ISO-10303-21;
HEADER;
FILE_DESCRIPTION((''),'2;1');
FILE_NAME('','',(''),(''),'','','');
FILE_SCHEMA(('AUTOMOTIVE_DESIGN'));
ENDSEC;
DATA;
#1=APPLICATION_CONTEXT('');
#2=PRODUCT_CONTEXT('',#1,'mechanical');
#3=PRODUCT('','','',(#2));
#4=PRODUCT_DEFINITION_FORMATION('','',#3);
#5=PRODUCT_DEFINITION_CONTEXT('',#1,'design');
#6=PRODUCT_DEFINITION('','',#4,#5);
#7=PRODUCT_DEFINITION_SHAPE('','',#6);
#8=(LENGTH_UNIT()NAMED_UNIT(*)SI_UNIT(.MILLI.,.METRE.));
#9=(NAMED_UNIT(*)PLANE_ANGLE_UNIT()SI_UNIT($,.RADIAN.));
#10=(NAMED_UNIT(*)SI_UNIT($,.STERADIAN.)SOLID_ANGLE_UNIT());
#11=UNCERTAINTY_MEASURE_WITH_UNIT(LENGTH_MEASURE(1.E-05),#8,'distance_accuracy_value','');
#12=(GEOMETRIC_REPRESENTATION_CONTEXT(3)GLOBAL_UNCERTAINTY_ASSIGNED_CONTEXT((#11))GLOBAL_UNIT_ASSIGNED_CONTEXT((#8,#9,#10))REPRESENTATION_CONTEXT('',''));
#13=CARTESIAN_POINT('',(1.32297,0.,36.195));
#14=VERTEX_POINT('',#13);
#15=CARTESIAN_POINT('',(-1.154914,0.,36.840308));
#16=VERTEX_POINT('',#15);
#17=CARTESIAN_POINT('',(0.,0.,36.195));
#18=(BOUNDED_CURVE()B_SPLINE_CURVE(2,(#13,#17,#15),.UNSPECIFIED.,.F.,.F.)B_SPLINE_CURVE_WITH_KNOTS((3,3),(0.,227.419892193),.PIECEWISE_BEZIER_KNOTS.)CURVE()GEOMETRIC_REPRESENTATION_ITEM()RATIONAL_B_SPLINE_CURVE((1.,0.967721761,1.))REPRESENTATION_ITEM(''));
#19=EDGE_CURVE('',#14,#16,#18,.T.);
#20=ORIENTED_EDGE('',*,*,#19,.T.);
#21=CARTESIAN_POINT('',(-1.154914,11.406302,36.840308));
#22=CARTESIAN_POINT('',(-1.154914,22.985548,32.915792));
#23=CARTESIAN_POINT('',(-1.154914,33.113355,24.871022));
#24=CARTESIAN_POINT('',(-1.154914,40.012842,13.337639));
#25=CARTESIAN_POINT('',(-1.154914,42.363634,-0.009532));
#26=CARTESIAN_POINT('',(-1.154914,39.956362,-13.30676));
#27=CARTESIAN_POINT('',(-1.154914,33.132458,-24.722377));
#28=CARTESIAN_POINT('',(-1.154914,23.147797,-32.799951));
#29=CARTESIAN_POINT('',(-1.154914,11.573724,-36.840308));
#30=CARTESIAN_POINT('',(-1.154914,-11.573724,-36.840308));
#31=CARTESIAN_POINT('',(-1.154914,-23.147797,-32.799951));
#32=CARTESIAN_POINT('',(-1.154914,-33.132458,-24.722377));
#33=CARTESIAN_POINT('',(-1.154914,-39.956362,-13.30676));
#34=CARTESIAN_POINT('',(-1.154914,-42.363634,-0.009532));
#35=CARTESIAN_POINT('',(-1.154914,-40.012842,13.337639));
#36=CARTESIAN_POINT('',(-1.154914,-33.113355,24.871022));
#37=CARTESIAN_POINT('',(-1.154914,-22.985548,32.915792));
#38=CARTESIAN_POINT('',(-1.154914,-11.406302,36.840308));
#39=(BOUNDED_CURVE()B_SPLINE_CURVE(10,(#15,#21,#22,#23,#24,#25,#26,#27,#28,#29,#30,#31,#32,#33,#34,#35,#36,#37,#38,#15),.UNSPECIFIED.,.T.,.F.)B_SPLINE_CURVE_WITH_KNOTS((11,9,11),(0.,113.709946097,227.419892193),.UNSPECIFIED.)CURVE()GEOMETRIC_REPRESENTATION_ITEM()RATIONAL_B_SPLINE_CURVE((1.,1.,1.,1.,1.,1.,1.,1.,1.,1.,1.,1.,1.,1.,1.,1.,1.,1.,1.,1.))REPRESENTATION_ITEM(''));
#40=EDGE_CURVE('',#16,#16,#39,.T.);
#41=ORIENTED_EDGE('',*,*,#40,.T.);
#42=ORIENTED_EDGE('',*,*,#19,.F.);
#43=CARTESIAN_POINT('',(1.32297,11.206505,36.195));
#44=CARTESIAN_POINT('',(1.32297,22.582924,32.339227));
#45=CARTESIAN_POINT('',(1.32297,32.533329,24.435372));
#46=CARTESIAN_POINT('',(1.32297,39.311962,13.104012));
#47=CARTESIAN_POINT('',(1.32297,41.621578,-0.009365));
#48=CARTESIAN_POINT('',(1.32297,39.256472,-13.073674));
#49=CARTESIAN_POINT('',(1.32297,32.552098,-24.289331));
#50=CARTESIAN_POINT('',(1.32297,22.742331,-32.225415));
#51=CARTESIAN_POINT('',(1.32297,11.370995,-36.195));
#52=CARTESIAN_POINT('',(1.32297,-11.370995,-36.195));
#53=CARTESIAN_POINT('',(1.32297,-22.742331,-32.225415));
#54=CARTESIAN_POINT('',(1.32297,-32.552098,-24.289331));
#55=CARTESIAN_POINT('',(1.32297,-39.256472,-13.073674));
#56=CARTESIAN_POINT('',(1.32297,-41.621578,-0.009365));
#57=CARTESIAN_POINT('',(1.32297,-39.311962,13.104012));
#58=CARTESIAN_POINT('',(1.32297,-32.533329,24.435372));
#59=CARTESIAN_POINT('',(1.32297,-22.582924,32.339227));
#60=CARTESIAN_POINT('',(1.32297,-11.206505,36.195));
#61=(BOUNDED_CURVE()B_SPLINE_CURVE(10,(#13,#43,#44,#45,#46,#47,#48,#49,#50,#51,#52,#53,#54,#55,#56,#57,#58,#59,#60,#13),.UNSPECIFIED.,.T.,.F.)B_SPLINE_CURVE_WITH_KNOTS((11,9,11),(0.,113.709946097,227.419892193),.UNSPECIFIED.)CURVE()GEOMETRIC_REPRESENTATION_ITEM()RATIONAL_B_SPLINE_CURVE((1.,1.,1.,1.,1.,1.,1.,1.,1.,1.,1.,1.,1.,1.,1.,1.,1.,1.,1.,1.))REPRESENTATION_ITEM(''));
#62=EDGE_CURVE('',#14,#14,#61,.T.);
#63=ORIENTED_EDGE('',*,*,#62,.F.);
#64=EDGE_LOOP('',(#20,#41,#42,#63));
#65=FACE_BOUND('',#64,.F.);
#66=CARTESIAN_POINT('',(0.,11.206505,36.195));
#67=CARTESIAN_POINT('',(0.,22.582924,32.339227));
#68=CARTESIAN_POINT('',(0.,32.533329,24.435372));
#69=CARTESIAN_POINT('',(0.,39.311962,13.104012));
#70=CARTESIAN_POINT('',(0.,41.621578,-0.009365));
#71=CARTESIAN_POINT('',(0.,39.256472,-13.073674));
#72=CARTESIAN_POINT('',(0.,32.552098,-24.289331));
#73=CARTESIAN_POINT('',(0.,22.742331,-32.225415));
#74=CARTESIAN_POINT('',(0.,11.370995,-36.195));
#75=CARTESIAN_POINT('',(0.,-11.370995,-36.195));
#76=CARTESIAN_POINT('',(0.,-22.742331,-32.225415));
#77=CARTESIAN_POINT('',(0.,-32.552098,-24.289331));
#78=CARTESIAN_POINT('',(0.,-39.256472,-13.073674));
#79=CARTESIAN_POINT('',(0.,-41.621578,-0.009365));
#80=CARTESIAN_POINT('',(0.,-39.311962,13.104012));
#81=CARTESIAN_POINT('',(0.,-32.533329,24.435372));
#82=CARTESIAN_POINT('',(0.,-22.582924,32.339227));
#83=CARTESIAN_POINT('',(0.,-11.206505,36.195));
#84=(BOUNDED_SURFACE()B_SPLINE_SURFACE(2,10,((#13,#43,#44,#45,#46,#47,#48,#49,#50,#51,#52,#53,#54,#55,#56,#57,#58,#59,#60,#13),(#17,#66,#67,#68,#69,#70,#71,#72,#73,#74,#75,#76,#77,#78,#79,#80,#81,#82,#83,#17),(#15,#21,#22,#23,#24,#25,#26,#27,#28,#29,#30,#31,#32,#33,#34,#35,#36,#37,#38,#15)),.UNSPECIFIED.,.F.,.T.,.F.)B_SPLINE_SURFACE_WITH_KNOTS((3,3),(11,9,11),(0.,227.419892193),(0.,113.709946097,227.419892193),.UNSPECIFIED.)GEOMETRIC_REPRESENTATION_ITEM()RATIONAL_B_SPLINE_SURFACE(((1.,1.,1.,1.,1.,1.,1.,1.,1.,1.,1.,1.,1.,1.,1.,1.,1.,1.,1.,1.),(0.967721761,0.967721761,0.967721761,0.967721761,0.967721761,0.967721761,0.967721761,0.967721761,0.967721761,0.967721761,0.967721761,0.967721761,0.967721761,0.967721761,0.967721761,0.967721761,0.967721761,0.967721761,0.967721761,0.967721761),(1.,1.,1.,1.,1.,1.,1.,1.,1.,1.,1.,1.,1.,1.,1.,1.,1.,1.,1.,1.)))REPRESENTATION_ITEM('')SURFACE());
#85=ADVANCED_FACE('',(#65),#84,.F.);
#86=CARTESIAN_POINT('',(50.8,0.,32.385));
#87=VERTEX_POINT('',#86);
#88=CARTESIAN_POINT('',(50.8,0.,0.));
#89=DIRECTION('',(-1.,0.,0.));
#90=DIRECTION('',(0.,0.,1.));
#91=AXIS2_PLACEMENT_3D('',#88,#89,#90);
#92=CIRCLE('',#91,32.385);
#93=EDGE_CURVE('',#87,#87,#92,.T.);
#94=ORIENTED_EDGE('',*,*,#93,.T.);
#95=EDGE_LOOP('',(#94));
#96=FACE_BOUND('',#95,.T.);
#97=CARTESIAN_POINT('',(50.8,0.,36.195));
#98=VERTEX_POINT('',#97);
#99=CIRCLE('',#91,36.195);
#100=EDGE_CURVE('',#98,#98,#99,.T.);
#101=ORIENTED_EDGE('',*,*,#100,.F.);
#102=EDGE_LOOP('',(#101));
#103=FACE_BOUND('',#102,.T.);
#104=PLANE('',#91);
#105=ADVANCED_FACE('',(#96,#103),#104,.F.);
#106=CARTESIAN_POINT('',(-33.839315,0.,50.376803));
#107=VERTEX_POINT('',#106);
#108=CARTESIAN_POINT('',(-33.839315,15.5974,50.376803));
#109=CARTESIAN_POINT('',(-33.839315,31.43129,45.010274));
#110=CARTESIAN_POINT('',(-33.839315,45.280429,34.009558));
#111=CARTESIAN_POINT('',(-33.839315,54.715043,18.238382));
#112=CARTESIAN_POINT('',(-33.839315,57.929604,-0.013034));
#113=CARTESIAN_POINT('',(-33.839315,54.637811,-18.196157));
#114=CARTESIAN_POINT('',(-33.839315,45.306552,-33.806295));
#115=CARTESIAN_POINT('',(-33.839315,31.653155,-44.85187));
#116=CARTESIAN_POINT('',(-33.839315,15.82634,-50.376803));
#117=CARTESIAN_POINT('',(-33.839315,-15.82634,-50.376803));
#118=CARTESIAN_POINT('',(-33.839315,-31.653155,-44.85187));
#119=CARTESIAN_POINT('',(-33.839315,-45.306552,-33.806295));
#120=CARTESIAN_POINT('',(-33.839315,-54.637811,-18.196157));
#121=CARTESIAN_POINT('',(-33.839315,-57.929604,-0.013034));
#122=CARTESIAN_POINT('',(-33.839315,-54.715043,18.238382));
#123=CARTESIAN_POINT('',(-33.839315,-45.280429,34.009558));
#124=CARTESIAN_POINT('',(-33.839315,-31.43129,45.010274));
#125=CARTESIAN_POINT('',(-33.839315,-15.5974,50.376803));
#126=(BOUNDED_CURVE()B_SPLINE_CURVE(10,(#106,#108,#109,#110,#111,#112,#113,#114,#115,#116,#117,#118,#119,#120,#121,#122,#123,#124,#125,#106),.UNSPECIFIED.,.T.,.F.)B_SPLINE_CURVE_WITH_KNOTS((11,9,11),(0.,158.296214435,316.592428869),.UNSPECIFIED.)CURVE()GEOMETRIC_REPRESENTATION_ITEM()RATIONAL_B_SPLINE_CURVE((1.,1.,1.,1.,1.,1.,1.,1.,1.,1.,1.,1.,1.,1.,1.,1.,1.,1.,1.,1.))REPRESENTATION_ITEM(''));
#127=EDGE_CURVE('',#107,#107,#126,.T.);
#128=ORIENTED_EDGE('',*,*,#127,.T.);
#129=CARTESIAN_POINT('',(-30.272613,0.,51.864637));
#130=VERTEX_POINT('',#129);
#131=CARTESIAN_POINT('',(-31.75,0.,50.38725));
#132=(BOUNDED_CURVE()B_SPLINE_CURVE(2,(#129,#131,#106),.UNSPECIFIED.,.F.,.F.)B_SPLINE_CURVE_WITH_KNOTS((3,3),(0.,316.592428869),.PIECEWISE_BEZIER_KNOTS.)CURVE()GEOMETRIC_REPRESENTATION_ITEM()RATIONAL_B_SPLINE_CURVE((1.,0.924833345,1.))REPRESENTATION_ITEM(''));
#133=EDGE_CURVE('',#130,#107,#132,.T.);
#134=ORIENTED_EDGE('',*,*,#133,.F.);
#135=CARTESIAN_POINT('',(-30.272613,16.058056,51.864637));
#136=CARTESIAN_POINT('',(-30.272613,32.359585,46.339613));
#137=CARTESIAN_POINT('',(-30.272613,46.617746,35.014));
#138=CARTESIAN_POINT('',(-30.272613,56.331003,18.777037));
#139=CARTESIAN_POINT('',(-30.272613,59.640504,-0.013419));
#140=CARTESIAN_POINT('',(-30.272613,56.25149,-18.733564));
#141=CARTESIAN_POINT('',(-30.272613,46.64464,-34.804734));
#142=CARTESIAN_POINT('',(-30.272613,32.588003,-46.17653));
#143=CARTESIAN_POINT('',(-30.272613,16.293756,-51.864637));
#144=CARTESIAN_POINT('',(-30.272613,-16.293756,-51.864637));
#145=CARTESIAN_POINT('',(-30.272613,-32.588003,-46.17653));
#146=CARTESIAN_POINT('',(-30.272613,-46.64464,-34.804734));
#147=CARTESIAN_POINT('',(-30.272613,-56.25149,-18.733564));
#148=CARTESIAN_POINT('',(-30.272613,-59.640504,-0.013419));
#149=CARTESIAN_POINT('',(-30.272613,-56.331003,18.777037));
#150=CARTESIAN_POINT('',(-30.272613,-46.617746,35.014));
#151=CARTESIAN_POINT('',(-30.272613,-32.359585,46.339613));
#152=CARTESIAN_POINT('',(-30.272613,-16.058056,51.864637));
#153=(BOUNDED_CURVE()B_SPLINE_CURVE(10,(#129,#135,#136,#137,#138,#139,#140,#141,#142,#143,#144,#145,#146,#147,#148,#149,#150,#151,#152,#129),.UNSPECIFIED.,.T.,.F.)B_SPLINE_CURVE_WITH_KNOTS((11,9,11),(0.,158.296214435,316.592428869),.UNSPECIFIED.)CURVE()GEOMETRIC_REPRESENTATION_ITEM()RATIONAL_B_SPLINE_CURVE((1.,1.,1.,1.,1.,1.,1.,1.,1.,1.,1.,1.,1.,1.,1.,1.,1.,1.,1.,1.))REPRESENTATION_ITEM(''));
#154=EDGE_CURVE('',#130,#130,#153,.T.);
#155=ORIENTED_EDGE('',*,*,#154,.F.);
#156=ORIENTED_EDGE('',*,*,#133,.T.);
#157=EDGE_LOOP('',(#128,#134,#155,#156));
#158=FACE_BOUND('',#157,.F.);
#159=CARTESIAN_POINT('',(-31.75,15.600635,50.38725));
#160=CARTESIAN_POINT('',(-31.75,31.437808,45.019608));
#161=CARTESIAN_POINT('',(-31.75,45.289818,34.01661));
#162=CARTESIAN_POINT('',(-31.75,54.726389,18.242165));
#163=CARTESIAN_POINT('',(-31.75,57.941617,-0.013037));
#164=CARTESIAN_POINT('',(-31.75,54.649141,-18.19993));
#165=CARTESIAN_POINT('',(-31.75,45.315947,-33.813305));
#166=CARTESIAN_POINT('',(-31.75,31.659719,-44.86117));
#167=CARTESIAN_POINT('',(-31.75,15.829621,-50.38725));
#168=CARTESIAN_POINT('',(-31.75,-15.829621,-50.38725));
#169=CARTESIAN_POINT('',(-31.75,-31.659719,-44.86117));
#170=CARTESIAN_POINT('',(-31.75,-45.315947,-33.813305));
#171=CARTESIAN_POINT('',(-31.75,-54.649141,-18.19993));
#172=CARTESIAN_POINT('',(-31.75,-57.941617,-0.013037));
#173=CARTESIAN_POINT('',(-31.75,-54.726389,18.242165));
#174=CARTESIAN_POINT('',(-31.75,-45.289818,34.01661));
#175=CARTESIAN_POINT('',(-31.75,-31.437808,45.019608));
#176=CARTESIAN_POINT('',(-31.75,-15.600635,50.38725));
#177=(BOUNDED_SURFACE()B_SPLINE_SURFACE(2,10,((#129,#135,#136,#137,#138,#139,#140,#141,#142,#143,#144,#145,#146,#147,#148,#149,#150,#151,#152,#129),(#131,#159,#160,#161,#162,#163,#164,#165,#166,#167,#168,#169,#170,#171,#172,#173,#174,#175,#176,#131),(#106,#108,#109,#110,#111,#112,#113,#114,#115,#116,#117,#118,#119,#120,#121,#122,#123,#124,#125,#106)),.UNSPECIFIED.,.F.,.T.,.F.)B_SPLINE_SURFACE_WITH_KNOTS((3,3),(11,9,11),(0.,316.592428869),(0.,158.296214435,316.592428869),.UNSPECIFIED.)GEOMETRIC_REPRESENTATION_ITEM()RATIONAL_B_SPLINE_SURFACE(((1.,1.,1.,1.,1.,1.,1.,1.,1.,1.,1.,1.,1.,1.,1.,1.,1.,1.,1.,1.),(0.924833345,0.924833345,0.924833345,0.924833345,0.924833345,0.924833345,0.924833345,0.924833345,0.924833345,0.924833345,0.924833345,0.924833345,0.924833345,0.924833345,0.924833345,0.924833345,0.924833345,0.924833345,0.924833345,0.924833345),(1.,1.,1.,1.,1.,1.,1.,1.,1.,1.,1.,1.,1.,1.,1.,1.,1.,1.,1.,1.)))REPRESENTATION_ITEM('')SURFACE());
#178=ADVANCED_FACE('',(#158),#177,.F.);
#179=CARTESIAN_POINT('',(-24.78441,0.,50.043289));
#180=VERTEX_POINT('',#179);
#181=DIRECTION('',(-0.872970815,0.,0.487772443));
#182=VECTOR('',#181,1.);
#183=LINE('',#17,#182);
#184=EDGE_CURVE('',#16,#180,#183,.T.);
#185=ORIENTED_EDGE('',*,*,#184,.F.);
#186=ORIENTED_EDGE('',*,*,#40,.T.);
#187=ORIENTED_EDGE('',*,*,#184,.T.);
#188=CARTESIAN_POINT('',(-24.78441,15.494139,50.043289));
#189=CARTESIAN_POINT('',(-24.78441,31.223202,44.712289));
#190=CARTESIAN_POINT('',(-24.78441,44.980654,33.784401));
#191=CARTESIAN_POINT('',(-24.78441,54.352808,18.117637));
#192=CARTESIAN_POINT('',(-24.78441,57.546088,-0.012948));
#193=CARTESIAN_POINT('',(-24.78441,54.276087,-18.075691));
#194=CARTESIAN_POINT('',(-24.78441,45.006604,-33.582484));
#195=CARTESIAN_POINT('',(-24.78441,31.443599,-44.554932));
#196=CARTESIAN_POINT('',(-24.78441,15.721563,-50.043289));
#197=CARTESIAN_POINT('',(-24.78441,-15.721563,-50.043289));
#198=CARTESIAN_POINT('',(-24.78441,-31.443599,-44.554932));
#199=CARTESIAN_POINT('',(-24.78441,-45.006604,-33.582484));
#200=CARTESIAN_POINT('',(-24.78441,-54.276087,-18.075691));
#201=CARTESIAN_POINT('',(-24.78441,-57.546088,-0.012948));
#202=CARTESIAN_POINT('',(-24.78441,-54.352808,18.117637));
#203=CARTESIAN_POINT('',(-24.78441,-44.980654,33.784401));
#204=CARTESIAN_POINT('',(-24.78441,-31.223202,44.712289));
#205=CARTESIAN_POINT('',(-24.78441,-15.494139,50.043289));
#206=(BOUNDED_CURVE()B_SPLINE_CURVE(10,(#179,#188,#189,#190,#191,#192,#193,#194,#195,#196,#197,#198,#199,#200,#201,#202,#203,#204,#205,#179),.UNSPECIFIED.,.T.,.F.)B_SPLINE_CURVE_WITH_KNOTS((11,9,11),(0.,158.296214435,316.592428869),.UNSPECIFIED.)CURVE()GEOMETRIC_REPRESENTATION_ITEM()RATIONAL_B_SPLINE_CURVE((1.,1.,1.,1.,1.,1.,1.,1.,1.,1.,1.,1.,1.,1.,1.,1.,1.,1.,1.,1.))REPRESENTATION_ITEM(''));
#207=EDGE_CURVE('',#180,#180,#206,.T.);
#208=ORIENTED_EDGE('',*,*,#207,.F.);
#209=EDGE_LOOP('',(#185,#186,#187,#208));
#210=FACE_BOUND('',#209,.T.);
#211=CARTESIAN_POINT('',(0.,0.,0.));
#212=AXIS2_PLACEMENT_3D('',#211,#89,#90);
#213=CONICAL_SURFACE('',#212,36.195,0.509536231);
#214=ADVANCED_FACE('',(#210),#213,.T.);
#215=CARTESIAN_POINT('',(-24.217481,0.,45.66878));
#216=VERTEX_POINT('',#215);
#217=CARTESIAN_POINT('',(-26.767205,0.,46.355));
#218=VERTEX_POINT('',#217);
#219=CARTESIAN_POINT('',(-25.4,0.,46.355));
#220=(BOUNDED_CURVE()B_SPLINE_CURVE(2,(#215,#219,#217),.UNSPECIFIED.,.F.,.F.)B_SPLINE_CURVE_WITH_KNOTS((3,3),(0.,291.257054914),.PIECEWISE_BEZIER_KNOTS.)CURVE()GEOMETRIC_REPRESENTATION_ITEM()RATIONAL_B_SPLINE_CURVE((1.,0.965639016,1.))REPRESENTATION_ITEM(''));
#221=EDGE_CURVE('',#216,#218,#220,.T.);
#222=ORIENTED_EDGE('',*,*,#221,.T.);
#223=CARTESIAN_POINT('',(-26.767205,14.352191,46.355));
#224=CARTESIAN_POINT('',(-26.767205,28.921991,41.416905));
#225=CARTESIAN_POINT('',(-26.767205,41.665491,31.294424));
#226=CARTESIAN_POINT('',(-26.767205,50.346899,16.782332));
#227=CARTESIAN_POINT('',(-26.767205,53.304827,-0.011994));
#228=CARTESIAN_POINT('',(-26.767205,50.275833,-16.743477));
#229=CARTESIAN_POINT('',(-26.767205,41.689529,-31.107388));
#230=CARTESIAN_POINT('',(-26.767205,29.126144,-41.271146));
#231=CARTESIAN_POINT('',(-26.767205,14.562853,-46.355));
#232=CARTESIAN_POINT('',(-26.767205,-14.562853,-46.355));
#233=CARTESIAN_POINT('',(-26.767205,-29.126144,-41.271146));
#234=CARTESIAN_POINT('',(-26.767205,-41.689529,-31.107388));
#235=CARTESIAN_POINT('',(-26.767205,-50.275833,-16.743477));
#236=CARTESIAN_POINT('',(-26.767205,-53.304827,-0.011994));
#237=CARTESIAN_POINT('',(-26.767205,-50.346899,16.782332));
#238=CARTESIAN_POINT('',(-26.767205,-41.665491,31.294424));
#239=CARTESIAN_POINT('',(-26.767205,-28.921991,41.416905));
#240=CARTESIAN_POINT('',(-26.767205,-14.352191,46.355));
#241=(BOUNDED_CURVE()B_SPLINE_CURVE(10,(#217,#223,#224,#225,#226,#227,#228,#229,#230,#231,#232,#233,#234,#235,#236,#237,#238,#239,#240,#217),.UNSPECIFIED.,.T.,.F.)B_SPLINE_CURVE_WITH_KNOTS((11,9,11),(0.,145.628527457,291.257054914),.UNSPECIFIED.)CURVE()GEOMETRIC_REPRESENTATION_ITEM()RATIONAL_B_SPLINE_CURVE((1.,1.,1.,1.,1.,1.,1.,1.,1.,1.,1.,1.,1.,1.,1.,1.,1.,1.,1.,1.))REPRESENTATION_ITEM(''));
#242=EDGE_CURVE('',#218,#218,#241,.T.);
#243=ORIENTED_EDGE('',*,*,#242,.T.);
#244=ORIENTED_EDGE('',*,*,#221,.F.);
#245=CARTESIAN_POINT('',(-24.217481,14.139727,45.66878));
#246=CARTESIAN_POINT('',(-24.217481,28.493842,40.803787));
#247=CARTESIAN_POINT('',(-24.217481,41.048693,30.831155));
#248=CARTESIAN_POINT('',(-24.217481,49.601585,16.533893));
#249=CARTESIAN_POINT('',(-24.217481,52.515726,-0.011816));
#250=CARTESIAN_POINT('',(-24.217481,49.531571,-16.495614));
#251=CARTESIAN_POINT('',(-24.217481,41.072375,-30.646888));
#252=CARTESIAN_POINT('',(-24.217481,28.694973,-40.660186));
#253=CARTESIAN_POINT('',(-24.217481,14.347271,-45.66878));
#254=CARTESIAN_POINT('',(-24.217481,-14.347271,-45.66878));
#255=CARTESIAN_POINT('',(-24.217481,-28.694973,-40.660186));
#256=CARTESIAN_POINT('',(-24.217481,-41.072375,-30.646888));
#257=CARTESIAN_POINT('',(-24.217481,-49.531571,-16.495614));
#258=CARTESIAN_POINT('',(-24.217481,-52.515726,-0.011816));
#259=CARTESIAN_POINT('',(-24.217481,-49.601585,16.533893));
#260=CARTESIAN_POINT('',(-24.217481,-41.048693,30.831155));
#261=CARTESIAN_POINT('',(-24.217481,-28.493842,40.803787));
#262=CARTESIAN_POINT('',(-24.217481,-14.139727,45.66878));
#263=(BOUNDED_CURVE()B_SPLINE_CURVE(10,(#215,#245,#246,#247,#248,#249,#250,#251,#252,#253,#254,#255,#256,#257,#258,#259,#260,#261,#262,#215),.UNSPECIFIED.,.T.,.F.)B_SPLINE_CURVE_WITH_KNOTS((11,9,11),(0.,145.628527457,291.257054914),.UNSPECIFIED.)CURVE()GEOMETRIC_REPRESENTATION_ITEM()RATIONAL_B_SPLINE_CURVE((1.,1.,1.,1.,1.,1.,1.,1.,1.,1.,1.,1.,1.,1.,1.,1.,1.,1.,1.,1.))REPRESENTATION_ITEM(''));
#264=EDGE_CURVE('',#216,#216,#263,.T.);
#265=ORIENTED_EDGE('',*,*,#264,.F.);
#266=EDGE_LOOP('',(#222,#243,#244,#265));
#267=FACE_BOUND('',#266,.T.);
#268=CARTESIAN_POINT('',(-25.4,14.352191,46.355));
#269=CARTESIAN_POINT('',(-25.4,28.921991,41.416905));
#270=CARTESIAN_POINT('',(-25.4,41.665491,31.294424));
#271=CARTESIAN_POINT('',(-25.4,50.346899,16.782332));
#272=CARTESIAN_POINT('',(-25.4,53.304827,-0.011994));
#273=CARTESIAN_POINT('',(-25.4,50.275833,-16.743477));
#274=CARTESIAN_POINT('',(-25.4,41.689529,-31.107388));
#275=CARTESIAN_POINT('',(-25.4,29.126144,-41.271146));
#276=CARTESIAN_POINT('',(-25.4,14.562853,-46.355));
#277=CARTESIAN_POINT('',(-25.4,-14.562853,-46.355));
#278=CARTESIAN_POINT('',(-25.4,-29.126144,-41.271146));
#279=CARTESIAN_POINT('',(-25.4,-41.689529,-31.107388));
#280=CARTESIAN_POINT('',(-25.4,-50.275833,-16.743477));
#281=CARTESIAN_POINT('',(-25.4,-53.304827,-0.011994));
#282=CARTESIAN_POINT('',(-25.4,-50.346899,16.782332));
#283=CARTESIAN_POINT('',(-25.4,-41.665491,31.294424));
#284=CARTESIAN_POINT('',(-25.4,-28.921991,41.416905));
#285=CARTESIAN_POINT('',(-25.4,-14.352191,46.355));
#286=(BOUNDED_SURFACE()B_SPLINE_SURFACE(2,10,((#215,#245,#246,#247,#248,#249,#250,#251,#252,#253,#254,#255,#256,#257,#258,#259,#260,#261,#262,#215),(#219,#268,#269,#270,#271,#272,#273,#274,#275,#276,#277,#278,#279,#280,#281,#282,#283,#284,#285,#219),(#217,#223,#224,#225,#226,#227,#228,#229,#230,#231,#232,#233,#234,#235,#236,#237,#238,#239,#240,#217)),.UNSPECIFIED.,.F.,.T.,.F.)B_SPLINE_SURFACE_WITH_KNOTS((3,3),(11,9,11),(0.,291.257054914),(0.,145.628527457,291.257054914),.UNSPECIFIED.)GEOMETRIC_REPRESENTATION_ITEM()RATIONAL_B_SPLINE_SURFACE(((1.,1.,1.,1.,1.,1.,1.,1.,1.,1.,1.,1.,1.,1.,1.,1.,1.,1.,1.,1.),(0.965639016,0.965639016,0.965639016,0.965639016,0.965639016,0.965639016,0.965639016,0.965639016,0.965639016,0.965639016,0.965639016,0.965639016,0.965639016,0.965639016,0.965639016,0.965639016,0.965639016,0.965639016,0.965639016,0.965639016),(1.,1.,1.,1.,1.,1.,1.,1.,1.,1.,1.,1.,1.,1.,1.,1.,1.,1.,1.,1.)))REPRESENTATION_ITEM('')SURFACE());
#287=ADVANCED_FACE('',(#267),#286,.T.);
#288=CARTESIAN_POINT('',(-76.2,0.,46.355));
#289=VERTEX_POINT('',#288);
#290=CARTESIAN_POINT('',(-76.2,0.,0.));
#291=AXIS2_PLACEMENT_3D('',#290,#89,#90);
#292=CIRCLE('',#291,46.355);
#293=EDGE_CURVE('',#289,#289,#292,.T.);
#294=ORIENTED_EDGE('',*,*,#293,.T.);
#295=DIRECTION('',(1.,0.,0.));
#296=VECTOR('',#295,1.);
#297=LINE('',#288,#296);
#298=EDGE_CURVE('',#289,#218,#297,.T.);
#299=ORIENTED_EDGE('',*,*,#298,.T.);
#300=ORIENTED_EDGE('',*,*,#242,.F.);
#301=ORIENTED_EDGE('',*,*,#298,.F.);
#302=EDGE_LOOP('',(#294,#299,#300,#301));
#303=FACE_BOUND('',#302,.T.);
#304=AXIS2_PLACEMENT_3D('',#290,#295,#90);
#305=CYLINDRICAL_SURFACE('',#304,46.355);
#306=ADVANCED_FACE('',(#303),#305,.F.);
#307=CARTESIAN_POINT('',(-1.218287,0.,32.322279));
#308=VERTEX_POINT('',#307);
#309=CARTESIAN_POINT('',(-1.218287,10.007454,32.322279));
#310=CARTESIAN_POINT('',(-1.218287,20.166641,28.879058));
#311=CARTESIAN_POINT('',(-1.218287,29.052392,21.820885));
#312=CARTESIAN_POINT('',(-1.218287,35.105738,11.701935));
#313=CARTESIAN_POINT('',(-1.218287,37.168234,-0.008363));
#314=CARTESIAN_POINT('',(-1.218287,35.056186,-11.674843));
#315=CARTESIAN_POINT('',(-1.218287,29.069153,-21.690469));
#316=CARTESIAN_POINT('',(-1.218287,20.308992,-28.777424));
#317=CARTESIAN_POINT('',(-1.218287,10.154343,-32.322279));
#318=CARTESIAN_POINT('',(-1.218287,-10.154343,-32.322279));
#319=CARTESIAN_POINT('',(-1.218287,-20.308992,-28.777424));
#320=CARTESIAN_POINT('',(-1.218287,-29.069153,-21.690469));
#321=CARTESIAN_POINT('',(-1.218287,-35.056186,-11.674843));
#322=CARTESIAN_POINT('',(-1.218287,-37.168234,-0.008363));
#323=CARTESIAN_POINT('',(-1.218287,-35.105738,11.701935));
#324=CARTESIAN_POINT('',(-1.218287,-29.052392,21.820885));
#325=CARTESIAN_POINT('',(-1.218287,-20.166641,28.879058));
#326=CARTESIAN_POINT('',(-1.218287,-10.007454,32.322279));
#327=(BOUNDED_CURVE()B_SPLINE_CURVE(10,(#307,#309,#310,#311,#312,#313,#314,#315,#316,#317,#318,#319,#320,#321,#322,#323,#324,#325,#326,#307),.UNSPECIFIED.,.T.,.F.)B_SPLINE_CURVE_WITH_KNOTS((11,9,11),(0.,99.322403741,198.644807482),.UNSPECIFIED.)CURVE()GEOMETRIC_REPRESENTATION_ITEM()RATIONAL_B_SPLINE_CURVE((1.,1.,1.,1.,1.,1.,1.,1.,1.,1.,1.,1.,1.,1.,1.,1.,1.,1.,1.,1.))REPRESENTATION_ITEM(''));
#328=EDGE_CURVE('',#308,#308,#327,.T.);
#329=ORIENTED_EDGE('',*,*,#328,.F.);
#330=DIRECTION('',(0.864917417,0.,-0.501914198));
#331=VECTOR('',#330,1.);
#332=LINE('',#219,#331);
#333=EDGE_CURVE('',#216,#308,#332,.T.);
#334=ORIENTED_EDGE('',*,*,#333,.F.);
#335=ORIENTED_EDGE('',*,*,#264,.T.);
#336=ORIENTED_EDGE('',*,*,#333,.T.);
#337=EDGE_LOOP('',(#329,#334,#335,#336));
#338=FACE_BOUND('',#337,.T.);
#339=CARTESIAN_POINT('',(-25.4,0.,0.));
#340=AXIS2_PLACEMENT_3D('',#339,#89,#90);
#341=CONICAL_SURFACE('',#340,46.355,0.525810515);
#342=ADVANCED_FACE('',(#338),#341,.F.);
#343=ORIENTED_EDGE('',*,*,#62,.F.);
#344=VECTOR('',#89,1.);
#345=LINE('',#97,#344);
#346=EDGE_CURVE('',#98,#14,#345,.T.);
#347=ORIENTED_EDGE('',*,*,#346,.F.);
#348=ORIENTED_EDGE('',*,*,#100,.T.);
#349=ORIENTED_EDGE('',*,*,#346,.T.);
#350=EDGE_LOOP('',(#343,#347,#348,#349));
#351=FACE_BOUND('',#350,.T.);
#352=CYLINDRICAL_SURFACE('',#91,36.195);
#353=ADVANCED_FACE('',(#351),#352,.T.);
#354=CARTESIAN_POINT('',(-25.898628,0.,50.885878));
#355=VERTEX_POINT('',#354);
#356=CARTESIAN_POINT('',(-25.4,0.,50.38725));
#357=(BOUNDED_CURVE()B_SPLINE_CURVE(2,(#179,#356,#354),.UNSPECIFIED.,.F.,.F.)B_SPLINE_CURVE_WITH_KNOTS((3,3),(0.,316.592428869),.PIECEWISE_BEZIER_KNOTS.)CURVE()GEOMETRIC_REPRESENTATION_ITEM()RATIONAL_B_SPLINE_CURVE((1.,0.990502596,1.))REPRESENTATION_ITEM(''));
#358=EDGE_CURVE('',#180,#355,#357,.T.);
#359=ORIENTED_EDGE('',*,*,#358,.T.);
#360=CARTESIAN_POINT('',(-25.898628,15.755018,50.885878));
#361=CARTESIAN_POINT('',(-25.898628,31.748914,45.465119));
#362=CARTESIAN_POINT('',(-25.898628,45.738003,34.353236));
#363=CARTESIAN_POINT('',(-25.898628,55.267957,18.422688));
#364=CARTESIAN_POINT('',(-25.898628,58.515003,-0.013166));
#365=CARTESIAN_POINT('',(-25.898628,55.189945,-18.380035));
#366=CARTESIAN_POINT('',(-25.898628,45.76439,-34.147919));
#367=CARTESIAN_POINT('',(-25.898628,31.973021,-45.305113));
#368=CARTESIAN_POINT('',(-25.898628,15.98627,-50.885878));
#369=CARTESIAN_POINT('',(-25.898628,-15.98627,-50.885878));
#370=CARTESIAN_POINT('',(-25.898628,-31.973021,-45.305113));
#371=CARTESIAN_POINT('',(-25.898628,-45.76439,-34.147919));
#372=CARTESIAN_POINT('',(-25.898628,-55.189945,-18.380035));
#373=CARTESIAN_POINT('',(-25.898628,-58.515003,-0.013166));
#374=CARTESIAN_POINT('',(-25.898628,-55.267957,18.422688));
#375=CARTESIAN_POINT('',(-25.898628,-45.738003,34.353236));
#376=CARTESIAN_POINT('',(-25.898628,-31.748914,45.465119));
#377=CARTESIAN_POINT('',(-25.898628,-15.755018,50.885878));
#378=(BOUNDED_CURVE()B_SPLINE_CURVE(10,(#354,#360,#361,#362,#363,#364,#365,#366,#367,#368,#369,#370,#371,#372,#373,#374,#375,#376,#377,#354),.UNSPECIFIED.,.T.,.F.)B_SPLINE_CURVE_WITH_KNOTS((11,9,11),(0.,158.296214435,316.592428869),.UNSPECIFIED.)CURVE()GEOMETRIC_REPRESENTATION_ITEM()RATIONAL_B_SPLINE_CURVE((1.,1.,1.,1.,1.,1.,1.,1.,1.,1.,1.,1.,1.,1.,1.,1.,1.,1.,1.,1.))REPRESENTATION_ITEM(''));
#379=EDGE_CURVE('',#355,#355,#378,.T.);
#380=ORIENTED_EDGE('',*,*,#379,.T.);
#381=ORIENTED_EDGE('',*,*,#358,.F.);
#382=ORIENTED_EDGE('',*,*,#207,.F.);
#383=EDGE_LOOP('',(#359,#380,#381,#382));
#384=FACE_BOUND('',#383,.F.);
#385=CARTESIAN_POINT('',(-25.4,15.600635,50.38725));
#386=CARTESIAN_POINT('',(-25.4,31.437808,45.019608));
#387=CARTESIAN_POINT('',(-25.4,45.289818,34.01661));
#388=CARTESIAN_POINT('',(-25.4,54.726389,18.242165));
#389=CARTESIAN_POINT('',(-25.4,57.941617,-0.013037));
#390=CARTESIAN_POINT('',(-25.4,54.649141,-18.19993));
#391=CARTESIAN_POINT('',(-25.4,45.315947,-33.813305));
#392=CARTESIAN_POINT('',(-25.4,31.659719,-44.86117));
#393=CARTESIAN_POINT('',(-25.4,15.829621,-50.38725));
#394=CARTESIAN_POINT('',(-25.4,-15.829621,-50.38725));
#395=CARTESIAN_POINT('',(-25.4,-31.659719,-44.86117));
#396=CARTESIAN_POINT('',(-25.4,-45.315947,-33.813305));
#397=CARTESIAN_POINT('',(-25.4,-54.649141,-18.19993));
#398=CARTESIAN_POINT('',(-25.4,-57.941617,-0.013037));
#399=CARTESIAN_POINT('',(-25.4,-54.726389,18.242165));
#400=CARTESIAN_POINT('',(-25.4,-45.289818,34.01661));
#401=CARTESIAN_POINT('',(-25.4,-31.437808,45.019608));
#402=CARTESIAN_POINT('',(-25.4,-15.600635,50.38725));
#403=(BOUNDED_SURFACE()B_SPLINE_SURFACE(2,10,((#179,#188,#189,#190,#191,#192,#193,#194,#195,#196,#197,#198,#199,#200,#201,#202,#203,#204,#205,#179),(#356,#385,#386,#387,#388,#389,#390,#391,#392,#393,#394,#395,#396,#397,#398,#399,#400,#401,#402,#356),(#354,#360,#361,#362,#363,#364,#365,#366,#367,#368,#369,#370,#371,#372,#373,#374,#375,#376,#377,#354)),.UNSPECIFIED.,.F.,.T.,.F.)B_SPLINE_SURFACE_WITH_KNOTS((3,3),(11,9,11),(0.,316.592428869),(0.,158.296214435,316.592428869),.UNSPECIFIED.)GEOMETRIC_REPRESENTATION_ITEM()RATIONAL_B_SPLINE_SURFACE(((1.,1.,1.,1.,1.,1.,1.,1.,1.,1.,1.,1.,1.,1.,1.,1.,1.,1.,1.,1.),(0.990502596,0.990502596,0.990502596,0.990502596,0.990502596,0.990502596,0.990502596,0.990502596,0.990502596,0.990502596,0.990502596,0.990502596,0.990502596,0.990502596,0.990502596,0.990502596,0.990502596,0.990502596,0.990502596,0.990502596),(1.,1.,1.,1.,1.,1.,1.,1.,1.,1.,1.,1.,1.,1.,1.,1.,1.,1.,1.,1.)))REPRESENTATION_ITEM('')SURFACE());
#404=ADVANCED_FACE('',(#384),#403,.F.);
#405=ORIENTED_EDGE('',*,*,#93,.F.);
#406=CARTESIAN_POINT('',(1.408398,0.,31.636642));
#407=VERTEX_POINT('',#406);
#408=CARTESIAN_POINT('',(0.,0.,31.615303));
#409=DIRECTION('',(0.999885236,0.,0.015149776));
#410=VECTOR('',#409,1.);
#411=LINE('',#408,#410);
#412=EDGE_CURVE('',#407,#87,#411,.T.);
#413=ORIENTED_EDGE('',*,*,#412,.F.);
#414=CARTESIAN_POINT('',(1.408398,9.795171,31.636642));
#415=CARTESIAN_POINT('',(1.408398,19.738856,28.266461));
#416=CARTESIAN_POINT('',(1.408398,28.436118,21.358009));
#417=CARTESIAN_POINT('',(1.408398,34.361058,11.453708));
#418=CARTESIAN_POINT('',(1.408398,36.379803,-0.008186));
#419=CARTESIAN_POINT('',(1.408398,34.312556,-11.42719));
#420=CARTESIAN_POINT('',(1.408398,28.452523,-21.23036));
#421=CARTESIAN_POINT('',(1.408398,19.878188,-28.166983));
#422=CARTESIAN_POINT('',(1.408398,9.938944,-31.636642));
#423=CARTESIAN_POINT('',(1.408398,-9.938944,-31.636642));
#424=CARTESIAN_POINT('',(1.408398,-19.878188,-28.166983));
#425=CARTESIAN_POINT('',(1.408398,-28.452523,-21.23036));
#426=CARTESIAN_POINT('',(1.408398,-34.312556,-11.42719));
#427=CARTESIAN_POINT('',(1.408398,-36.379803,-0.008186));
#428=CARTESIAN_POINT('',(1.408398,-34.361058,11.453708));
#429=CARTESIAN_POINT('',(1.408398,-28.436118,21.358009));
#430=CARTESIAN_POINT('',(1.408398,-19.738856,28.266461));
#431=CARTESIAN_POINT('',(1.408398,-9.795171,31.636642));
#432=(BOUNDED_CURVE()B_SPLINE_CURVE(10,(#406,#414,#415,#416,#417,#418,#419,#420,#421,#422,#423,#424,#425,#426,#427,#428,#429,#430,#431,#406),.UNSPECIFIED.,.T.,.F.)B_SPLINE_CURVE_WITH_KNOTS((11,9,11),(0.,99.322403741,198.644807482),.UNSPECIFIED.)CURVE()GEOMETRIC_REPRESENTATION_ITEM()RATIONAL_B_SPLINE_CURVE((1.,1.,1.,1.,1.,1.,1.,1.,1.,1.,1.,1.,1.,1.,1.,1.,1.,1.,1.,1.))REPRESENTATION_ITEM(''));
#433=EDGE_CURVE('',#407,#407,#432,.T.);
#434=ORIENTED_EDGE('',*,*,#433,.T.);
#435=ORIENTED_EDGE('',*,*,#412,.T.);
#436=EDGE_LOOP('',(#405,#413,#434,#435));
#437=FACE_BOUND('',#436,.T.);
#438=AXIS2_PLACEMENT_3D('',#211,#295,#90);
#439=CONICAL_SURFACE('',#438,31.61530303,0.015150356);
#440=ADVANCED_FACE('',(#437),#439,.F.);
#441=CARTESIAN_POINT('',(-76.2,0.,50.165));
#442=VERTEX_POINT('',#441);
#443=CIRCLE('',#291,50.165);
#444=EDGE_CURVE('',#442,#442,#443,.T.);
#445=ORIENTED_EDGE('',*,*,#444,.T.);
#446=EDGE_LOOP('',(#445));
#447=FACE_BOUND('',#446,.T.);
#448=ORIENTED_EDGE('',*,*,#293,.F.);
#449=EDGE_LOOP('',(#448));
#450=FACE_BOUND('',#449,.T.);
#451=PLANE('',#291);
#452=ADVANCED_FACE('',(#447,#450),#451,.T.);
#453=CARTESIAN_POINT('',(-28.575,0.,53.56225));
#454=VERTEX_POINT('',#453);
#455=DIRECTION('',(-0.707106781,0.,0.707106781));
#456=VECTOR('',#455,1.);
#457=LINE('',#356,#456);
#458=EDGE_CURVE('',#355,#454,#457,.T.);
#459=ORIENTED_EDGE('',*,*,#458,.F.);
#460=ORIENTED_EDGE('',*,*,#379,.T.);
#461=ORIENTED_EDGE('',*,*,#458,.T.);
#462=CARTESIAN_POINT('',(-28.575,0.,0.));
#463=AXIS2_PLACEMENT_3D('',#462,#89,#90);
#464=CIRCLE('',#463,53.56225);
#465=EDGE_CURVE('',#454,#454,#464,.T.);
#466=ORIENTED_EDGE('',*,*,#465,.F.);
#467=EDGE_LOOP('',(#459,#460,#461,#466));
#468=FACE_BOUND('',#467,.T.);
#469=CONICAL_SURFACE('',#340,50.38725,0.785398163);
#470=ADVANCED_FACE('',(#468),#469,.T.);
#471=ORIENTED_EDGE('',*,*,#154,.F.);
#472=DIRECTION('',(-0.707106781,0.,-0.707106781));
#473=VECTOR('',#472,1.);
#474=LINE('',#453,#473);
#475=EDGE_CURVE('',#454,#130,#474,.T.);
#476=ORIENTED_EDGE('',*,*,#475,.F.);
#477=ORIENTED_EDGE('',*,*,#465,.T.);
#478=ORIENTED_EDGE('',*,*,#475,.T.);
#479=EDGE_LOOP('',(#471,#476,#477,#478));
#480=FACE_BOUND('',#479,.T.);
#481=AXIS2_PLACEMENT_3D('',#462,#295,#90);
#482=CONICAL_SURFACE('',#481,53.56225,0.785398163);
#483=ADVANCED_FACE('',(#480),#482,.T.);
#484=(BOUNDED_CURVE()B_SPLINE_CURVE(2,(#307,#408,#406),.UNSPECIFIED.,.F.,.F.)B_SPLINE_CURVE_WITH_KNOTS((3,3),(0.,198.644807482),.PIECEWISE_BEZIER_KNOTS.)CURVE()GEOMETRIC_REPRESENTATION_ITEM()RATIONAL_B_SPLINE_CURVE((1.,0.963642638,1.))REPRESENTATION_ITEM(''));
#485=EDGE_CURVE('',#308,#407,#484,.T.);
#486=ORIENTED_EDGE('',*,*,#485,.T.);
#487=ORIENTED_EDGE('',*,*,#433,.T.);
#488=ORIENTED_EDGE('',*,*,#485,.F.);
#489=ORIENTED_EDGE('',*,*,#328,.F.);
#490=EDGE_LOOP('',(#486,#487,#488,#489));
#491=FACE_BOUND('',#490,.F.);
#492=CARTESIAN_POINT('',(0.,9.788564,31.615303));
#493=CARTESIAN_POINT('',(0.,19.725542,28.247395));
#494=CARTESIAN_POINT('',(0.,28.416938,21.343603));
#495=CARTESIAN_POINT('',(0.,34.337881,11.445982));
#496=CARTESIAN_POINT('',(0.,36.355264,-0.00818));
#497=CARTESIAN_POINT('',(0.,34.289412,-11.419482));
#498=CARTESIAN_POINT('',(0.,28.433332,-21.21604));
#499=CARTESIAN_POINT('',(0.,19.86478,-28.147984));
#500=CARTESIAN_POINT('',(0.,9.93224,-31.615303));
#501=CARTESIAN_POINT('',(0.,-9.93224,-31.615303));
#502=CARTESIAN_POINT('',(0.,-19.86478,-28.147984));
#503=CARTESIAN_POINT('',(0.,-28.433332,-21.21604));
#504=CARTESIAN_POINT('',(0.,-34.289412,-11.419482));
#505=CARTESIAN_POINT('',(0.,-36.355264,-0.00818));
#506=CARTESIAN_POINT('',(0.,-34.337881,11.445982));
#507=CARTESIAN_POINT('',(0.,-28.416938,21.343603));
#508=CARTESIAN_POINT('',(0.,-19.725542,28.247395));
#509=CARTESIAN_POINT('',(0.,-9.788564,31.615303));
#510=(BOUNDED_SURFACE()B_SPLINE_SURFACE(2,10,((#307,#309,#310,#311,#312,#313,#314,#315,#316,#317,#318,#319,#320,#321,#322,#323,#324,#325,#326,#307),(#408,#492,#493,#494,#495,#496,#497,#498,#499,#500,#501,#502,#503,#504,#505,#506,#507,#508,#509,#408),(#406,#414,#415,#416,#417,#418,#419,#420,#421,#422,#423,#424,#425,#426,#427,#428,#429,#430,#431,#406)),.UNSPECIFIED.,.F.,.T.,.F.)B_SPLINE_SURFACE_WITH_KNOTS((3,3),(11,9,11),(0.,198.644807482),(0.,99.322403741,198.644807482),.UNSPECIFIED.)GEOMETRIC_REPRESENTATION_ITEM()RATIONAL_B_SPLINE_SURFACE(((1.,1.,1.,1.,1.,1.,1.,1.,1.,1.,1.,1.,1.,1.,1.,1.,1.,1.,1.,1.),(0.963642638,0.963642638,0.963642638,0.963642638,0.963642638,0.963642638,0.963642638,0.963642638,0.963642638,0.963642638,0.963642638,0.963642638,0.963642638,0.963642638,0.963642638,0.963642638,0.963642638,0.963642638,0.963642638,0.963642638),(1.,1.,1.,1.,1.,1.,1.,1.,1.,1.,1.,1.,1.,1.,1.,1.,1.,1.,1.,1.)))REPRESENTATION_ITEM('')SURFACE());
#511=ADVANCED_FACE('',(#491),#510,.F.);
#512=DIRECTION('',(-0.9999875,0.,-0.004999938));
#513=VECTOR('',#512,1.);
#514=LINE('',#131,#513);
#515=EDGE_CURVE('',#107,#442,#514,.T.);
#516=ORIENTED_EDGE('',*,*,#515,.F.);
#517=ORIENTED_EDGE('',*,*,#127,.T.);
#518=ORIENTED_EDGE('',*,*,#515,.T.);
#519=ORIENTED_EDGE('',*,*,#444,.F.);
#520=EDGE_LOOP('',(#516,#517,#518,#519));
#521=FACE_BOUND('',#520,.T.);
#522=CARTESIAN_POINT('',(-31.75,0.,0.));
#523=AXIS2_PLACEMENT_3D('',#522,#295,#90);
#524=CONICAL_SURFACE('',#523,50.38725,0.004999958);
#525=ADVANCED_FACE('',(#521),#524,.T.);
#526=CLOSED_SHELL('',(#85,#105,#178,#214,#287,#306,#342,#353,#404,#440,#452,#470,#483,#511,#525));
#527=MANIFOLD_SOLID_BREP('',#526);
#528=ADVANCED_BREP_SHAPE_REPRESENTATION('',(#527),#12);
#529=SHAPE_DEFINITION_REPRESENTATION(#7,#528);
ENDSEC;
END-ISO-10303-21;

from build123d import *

# Parameters (mm, degrees)
F3_R = 5.08


# Not quite as in the source:
# - a variable given as a bare number and used for a length is read in inches; the dataset says mm whatever the document's units were


with BuildPart() as f2:
    # F1 (on Front) → F2 (revolve)
    with BuildSketch(Plane.XZ):
        Polygon((-25.4, 46.355), (0, 31.6153030303), (50.8, 32.385), (50.8, 36.195), (0, 36.195), (-25.4, 50.38725), (-28.575, 53.56225), (-31.75, 50.38725), (-76.2, 50.165), (-76.2, 46.355), align=None)
    revolve(axis=Axis((-24.3991323134, 0, 0), (-1, 0, 0)))

    # F3
    f3_edges = [f2.edges().sort_by_distance(p)[0] for p in [
        (-25.4, 0, -46.355),
        (0, 0, -31.615303),
        (0, 0, -36.195),
        (-31.75, 0, -50.38725),
        (-25.4, 0, -50.38725),
    ]]
    fillet(f3_edges, radius=F3_R)


solid = f2.part
